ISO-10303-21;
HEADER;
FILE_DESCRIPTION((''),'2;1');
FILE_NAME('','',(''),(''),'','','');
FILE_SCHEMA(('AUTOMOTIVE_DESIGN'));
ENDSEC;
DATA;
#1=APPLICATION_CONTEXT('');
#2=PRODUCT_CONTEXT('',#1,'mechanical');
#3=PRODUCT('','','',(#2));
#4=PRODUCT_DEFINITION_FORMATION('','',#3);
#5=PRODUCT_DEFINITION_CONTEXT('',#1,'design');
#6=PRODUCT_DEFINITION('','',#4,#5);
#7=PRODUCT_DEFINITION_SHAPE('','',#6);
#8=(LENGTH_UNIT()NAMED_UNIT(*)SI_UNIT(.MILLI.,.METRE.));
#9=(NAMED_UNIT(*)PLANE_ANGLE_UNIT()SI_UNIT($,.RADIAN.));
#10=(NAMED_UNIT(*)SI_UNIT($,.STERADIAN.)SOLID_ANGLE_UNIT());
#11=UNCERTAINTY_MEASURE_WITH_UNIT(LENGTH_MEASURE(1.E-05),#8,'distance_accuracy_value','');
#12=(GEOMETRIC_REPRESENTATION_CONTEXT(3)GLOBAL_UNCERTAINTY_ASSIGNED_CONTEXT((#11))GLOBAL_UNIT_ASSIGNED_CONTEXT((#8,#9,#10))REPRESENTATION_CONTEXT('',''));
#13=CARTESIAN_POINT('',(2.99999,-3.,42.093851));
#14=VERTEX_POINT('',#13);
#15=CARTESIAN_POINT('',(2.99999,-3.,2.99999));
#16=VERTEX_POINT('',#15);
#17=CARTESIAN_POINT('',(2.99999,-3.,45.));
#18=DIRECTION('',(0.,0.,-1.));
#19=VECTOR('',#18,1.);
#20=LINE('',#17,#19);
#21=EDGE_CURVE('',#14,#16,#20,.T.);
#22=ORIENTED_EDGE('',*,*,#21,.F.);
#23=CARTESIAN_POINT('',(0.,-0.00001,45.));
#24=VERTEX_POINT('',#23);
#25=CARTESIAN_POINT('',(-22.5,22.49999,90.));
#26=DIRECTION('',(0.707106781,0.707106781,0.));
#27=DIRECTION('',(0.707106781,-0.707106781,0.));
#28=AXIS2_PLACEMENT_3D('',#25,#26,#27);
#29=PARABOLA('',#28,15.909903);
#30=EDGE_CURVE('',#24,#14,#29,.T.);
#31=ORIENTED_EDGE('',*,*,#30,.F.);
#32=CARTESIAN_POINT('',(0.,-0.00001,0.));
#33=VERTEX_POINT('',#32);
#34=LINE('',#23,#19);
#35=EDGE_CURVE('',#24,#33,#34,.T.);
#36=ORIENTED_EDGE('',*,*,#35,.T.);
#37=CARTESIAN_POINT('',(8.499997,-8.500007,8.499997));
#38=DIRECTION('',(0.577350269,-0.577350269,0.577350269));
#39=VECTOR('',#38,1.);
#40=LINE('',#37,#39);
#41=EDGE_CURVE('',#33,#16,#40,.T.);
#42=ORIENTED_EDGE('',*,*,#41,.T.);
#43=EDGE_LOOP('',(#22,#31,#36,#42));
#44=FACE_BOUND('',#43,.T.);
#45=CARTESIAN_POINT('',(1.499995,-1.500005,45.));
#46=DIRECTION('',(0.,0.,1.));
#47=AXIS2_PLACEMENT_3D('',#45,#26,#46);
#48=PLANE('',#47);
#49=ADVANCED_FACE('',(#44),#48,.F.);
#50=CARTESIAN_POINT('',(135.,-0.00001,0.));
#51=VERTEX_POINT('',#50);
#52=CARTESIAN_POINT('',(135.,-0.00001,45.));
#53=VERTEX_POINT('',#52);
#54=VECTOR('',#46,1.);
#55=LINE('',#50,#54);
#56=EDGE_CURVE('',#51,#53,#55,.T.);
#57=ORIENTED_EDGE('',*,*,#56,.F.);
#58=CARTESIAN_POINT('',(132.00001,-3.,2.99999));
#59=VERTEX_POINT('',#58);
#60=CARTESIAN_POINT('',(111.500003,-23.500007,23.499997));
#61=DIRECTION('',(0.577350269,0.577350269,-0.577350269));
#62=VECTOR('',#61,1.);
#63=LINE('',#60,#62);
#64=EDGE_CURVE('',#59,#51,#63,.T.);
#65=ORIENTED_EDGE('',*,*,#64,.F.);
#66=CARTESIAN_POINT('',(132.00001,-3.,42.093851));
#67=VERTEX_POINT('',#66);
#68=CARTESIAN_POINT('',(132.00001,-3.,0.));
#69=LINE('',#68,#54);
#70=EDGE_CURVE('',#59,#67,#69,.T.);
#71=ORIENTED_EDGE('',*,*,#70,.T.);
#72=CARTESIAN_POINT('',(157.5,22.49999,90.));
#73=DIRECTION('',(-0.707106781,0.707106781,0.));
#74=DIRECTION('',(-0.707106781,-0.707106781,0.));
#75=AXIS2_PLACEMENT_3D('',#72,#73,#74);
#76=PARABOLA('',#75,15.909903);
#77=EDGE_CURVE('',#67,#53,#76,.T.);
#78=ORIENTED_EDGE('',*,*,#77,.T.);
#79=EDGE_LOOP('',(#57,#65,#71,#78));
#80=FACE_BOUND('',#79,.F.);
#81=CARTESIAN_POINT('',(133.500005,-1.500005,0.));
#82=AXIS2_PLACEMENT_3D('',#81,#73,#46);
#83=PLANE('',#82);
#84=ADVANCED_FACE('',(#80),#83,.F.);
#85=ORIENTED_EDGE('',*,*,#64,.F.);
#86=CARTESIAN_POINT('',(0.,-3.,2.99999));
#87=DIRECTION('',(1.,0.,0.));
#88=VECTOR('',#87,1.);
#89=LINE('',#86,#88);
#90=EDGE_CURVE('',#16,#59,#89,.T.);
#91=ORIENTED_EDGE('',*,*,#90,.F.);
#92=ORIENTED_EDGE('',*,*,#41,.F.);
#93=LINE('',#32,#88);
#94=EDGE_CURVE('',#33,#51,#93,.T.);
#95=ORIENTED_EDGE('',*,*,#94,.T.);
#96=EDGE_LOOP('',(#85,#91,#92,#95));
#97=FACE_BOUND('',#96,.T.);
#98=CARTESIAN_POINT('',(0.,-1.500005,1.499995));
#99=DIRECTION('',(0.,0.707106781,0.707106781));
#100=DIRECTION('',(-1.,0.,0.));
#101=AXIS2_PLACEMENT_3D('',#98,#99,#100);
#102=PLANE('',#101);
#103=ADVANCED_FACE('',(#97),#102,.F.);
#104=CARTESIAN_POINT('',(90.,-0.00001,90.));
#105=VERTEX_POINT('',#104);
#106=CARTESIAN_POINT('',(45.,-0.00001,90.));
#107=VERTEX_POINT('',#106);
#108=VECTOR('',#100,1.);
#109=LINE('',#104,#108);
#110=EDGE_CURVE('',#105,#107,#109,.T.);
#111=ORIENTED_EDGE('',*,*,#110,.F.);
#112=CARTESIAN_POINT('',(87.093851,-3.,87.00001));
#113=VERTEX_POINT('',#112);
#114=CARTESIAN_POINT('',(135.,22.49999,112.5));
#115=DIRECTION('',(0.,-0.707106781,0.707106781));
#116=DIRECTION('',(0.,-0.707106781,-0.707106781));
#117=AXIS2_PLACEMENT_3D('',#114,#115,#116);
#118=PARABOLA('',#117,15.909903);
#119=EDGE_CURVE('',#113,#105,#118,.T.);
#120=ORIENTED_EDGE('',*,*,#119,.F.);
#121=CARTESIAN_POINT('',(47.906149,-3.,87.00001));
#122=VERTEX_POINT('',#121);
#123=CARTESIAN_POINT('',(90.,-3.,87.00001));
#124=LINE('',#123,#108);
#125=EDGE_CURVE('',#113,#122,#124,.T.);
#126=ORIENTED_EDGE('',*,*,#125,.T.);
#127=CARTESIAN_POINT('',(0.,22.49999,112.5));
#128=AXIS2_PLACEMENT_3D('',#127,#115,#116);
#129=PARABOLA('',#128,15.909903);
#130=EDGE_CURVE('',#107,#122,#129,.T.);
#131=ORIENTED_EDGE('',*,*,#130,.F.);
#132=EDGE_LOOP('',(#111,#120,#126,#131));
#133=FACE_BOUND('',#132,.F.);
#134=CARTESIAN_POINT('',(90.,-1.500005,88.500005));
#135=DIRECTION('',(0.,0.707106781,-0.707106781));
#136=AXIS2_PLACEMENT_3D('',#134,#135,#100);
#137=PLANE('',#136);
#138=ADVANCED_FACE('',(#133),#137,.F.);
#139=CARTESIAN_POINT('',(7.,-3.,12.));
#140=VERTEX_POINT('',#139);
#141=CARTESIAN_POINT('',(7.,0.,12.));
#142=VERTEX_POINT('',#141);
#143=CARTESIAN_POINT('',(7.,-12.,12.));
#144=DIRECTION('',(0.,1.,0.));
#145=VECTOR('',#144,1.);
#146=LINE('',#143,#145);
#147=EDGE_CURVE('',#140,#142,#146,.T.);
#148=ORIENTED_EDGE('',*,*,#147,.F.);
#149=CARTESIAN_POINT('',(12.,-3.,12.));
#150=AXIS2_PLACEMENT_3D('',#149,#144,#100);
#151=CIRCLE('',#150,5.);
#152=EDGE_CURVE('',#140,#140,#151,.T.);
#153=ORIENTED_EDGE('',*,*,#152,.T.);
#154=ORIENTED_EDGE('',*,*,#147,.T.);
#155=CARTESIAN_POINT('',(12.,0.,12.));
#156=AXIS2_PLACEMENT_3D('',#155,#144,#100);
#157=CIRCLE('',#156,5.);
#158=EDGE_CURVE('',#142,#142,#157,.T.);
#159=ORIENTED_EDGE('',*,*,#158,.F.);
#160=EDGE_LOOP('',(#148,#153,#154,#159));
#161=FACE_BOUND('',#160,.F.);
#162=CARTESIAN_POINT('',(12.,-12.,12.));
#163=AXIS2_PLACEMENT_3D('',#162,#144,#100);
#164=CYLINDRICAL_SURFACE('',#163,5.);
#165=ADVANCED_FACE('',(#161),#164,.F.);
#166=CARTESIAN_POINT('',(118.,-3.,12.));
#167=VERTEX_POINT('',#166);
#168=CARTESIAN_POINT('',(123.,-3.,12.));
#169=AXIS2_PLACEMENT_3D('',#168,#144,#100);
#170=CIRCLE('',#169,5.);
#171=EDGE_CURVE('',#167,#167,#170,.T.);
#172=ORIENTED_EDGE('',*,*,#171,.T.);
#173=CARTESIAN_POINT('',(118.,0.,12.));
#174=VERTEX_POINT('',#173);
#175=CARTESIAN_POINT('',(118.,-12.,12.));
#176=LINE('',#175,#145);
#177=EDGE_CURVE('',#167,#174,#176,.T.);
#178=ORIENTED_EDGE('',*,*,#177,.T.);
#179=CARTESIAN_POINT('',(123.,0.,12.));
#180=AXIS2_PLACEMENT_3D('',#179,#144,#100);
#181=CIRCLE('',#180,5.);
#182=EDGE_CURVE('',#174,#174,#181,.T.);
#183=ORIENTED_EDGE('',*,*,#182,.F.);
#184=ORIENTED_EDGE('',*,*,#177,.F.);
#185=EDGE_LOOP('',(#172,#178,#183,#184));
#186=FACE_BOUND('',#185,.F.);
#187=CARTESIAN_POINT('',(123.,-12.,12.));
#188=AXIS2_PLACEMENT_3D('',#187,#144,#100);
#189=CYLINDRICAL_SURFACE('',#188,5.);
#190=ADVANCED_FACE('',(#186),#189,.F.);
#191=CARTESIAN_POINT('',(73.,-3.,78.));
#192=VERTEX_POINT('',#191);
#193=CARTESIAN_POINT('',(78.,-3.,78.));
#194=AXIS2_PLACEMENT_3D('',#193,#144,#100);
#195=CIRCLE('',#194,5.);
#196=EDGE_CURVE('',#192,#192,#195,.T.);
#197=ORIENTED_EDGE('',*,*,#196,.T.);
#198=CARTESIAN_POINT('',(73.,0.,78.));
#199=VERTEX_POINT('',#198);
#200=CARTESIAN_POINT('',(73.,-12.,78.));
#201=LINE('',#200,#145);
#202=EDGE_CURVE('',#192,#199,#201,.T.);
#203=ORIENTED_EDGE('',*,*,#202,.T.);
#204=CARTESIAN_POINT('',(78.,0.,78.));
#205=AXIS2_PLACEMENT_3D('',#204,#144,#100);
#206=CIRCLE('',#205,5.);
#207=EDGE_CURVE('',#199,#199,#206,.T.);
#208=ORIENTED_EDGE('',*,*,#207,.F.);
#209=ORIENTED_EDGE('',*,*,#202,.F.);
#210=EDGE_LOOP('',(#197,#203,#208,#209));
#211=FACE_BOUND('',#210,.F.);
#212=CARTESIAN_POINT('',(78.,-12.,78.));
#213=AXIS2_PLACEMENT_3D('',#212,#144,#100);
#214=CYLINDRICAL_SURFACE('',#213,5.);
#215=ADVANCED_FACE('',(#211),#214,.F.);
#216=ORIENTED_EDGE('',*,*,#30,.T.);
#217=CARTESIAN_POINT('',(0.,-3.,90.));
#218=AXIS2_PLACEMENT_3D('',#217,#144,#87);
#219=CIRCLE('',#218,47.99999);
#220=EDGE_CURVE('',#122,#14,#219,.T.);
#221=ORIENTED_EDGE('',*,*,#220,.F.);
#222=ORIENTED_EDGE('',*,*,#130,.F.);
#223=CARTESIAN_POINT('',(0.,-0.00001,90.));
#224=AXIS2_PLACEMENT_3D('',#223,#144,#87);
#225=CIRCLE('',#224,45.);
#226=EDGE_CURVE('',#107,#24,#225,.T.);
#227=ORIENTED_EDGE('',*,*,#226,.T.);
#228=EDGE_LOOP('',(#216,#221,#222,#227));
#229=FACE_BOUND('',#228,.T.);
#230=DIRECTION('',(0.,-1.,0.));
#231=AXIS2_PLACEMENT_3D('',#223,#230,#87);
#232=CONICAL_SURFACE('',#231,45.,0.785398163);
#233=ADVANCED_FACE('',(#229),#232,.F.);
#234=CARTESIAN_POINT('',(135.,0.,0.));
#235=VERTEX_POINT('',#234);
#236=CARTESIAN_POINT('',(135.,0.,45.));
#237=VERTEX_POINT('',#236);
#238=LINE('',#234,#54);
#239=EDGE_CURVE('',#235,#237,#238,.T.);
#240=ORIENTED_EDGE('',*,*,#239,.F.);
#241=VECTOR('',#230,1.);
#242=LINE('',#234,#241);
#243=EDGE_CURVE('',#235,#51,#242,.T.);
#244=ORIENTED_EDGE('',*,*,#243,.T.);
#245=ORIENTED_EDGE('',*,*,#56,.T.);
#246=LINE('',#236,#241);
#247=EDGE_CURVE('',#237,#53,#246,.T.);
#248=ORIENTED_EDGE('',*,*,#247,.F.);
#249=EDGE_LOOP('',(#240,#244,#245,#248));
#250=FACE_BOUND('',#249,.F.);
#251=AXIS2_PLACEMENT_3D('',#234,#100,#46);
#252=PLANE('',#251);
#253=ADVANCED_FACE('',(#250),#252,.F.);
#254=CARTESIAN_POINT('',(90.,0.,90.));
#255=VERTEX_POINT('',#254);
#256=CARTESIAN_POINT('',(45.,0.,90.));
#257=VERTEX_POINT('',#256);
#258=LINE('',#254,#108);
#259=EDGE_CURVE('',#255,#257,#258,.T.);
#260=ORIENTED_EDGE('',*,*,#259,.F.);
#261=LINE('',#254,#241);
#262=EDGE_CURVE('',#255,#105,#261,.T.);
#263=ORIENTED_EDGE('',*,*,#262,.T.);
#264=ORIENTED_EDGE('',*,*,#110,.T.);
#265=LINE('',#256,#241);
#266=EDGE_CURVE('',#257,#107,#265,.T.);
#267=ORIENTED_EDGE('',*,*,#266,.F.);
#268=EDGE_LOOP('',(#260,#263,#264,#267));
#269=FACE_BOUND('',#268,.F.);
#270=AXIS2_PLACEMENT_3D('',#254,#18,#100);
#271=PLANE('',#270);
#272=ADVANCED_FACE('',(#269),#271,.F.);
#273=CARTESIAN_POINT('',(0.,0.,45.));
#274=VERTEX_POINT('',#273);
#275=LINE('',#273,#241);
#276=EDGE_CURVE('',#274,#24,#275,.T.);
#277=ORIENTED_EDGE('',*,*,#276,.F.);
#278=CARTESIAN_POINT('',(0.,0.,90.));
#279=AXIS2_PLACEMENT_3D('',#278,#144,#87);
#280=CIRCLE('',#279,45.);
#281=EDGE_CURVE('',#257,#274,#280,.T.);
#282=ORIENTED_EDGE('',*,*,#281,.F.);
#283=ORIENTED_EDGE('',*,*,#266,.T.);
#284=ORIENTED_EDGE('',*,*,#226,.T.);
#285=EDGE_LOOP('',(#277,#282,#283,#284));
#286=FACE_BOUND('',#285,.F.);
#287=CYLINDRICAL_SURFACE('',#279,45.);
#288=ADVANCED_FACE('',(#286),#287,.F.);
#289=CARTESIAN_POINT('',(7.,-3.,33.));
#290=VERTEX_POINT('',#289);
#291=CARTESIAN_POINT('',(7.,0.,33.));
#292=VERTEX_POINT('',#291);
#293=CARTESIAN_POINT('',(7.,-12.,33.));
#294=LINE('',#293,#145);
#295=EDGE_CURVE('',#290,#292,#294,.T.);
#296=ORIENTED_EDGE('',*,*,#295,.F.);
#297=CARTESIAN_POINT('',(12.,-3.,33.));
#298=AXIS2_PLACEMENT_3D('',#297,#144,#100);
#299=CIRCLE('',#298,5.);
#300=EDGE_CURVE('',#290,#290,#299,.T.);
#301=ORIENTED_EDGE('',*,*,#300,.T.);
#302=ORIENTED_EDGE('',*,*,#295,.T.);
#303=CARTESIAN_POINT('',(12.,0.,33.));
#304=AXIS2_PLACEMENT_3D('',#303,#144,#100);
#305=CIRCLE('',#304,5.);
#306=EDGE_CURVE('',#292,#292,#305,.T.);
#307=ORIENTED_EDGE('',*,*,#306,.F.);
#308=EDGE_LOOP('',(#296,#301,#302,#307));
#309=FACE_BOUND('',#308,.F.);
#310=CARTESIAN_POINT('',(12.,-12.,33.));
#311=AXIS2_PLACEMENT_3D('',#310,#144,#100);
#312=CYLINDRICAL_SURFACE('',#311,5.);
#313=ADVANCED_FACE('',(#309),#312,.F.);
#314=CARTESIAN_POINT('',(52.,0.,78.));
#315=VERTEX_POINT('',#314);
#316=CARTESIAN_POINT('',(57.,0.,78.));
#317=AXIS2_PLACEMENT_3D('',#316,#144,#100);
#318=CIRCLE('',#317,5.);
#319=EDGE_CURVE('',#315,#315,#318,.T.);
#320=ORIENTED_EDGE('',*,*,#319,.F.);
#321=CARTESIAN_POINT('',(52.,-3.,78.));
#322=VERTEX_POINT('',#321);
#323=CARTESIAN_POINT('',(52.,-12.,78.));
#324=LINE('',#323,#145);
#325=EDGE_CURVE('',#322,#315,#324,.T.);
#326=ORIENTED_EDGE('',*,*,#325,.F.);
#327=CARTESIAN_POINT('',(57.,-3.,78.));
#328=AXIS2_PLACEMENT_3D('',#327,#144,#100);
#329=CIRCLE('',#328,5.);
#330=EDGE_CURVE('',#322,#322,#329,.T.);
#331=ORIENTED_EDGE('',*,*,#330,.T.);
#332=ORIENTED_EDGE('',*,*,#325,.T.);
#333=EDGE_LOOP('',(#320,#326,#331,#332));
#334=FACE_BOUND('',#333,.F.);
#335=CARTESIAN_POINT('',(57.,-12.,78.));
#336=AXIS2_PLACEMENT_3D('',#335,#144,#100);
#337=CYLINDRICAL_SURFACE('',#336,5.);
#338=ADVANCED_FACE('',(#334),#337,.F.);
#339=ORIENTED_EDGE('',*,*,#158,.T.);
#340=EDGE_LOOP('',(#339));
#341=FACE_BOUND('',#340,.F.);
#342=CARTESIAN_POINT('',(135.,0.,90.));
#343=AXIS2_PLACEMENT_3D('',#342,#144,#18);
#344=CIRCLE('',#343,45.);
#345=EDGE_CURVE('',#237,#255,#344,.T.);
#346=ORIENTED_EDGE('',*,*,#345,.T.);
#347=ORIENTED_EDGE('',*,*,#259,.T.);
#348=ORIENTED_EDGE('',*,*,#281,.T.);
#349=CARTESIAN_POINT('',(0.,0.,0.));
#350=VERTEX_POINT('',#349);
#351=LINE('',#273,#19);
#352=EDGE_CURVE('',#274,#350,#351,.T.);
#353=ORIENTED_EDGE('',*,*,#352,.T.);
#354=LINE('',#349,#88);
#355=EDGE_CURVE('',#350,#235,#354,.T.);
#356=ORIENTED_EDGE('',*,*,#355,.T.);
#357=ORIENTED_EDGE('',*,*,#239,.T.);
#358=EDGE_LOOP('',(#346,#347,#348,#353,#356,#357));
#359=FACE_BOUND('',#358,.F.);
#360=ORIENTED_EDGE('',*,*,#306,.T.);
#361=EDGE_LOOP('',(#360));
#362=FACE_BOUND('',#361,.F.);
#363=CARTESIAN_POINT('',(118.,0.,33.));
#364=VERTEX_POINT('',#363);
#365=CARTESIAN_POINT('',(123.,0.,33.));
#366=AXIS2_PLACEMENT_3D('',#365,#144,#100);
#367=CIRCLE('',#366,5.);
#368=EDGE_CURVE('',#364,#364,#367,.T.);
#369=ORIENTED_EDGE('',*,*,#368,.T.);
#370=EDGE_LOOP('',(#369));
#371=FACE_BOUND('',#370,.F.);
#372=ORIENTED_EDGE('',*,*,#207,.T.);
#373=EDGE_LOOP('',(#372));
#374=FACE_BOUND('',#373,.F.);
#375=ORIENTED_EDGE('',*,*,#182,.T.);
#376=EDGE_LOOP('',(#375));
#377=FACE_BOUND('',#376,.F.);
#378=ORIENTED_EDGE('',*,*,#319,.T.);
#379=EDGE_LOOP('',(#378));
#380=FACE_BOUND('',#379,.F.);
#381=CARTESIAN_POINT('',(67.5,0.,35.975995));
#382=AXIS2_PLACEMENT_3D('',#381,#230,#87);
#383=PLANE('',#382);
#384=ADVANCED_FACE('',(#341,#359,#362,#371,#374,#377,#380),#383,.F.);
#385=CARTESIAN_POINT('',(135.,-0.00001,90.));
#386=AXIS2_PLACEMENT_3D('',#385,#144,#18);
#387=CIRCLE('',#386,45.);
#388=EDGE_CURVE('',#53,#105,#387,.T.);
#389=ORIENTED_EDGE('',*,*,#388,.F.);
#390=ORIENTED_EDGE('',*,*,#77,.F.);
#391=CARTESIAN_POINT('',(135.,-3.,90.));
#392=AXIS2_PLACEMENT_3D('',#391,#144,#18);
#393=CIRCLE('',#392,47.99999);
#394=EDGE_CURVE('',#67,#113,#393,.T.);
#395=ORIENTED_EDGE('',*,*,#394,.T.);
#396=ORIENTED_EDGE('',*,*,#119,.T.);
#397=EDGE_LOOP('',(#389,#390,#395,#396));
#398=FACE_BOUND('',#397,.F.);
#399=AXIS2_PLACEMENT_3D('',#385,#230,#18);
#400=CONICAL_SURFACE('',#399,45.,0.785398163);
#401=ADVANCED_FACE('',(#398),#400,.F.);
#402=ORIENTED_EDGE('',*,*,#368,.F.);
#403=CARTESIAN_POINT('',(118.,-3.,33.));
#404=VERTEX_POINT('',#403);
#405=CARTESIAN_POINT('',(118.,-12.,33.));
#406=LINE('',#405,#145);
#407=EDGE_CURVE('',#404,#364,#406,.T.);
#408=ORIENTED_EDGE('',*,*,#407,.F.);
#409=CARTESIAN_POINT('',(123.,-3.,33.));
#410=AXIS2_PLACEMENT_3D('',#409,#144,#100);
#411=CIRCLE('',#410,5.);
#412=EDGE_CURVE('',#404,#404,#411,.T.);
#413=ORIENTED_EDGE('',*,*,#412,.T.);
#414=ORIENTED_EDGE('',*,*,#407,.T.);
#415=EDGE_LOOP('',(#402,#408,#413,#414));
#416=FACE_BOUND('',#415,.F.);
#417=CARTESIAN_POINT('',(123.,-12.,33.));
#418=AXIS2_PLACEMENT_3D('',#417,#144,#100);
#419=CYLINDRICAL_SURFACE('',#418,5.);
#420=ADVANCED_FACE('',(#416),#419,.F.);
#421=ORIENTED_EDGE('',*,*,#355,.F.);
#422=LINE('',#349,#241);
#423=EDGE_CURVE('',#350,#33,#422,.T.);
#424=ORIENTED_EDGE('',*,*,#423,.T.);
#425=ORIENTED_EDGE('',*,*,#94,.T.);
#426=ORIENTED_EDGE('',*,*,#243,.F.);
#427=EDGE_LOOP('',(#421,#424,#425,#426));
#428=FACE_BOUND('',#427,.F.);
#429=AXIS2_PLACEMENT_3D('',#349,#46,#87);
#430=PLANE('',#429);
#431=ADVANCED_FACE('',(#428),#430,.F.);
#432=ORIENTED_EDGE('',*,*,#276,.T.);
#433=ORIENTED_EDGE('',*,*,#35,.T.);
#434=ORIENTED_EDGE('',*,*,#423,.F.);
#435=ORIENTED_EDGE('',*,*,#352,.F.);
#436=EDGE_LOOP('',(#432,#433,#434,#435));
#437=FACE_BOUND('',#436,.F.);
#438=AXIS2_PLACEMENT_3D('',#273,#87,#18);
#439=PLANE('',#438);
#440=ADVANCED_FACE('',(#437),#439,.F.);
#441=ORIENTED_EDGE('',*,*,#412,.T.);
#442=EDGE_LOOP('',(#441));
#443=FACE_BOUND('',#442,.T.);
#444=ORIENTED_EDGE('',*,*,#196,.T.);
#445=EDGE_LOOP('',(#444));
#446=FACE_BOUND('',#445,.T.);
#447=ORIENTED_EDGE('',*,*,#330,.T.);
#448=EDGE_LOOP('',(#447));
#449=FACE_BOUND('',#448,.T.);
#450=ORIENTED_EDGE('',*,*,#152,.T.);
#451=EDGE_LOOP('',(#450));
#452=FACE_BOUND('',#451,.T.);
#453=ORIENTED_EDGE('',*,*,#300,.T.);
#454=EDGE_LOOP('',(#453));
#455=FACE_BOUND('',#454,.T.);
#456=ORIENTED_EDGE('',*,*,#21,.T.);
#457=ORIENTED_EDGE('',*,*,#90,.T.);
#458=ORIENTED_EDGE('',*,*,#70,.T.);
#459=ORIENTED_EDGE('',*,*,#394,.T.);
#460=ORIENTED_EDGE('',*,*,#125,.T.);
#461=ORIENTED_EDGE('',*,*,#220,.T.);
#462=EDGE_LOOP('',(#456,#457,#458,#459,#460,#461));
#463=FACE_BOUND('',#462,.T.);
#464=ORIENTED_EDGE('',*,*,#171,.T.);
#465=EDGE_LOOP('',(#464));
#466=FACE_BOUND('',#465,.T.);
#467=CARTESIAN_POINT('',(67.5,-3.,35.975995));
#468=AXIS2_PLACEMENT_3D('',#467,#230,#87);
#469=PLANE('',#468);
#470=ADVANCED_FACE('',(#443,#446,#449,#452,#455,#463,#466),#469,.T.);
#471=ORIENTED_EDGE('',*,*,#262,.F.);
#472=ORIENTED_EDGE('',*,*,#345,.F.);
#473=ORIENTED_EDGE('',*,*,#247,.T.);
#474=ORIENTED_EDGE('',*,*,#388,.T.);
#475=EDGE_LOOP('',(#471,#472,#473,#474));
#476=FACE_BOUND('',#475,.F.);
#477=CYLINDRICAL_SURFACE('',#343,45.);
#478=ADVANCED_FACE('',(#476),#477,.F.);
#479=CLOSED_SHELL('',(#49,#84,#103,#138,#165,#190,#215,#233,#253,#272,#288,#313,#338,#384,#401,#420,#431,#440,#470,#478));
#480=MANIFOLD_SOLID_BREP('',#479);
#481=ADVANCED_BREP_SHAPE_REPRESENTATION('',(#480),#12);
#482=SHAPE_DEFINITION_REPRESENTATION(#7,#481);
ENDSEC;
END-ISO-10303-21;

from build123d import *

# Parameters (mm, degrees)
F1_DEPTH = 3
F3_D     = 10
F3_DEPTH = 9
F3_TIP   = 3.0043030951
F4_SIZE  = 2.99999


# Not quite as in the source:
# - a fillet or chamfer is up to 0.001 mm smaller than in the source, because OpenCascade refuses the exact size


with BuildPart() as f1:
    # F0 (on Front) → F1 (new body)
    with BuildSketch(Plane.XZ):
        with BuildLine():
            Line((0, 45), (0, 0))
            Line((0, 0), (135, 0))
            Line((135, 0), (135, 45))
            ThreePointArc((135, 45), (103.1801948466, 58.1801948466), (90, 90))
            Line((90, 90), (45, 90))
            ThreePointArc((45, 90), (31.8198051534, 58.1801948466), (0, 45))
        make_face()
    extrude(amount=F1_DEPTH)

    # F3
    with Locations(Plane.XZ.offset(3)):
        with Locations((57, 78), (78, 78), (123, 33), (123, 12), (12, 12), (12, 33)):
            Hole(F3_D / 2, depth=F3_DEPTH)
            with Locations((0, 0, -(F3_DEPTH + F3_TIP / 2))):  # 118° drill point
                Cone(0, F3_D / 2, F3_TIP, mode=Mode.SUBTRACT)

    # F4 (size 3 in the source; OpenCascade refuses exactly that, so slightly less here)
    f4_edges = [f1.edges().sort_by_distance(p)[0] for p in [
        (31.819805, -3, 58.180195),
        (67.5, -3, 90),
        (103.180195, -3, 58.180195),
        (135, -3, 22.5),
        (0, -3, 22.5),
        (67.5, -3, 0),
    ]]
    chamfer(f4_edges, length=F4_SIZE)


solid = f1.part
